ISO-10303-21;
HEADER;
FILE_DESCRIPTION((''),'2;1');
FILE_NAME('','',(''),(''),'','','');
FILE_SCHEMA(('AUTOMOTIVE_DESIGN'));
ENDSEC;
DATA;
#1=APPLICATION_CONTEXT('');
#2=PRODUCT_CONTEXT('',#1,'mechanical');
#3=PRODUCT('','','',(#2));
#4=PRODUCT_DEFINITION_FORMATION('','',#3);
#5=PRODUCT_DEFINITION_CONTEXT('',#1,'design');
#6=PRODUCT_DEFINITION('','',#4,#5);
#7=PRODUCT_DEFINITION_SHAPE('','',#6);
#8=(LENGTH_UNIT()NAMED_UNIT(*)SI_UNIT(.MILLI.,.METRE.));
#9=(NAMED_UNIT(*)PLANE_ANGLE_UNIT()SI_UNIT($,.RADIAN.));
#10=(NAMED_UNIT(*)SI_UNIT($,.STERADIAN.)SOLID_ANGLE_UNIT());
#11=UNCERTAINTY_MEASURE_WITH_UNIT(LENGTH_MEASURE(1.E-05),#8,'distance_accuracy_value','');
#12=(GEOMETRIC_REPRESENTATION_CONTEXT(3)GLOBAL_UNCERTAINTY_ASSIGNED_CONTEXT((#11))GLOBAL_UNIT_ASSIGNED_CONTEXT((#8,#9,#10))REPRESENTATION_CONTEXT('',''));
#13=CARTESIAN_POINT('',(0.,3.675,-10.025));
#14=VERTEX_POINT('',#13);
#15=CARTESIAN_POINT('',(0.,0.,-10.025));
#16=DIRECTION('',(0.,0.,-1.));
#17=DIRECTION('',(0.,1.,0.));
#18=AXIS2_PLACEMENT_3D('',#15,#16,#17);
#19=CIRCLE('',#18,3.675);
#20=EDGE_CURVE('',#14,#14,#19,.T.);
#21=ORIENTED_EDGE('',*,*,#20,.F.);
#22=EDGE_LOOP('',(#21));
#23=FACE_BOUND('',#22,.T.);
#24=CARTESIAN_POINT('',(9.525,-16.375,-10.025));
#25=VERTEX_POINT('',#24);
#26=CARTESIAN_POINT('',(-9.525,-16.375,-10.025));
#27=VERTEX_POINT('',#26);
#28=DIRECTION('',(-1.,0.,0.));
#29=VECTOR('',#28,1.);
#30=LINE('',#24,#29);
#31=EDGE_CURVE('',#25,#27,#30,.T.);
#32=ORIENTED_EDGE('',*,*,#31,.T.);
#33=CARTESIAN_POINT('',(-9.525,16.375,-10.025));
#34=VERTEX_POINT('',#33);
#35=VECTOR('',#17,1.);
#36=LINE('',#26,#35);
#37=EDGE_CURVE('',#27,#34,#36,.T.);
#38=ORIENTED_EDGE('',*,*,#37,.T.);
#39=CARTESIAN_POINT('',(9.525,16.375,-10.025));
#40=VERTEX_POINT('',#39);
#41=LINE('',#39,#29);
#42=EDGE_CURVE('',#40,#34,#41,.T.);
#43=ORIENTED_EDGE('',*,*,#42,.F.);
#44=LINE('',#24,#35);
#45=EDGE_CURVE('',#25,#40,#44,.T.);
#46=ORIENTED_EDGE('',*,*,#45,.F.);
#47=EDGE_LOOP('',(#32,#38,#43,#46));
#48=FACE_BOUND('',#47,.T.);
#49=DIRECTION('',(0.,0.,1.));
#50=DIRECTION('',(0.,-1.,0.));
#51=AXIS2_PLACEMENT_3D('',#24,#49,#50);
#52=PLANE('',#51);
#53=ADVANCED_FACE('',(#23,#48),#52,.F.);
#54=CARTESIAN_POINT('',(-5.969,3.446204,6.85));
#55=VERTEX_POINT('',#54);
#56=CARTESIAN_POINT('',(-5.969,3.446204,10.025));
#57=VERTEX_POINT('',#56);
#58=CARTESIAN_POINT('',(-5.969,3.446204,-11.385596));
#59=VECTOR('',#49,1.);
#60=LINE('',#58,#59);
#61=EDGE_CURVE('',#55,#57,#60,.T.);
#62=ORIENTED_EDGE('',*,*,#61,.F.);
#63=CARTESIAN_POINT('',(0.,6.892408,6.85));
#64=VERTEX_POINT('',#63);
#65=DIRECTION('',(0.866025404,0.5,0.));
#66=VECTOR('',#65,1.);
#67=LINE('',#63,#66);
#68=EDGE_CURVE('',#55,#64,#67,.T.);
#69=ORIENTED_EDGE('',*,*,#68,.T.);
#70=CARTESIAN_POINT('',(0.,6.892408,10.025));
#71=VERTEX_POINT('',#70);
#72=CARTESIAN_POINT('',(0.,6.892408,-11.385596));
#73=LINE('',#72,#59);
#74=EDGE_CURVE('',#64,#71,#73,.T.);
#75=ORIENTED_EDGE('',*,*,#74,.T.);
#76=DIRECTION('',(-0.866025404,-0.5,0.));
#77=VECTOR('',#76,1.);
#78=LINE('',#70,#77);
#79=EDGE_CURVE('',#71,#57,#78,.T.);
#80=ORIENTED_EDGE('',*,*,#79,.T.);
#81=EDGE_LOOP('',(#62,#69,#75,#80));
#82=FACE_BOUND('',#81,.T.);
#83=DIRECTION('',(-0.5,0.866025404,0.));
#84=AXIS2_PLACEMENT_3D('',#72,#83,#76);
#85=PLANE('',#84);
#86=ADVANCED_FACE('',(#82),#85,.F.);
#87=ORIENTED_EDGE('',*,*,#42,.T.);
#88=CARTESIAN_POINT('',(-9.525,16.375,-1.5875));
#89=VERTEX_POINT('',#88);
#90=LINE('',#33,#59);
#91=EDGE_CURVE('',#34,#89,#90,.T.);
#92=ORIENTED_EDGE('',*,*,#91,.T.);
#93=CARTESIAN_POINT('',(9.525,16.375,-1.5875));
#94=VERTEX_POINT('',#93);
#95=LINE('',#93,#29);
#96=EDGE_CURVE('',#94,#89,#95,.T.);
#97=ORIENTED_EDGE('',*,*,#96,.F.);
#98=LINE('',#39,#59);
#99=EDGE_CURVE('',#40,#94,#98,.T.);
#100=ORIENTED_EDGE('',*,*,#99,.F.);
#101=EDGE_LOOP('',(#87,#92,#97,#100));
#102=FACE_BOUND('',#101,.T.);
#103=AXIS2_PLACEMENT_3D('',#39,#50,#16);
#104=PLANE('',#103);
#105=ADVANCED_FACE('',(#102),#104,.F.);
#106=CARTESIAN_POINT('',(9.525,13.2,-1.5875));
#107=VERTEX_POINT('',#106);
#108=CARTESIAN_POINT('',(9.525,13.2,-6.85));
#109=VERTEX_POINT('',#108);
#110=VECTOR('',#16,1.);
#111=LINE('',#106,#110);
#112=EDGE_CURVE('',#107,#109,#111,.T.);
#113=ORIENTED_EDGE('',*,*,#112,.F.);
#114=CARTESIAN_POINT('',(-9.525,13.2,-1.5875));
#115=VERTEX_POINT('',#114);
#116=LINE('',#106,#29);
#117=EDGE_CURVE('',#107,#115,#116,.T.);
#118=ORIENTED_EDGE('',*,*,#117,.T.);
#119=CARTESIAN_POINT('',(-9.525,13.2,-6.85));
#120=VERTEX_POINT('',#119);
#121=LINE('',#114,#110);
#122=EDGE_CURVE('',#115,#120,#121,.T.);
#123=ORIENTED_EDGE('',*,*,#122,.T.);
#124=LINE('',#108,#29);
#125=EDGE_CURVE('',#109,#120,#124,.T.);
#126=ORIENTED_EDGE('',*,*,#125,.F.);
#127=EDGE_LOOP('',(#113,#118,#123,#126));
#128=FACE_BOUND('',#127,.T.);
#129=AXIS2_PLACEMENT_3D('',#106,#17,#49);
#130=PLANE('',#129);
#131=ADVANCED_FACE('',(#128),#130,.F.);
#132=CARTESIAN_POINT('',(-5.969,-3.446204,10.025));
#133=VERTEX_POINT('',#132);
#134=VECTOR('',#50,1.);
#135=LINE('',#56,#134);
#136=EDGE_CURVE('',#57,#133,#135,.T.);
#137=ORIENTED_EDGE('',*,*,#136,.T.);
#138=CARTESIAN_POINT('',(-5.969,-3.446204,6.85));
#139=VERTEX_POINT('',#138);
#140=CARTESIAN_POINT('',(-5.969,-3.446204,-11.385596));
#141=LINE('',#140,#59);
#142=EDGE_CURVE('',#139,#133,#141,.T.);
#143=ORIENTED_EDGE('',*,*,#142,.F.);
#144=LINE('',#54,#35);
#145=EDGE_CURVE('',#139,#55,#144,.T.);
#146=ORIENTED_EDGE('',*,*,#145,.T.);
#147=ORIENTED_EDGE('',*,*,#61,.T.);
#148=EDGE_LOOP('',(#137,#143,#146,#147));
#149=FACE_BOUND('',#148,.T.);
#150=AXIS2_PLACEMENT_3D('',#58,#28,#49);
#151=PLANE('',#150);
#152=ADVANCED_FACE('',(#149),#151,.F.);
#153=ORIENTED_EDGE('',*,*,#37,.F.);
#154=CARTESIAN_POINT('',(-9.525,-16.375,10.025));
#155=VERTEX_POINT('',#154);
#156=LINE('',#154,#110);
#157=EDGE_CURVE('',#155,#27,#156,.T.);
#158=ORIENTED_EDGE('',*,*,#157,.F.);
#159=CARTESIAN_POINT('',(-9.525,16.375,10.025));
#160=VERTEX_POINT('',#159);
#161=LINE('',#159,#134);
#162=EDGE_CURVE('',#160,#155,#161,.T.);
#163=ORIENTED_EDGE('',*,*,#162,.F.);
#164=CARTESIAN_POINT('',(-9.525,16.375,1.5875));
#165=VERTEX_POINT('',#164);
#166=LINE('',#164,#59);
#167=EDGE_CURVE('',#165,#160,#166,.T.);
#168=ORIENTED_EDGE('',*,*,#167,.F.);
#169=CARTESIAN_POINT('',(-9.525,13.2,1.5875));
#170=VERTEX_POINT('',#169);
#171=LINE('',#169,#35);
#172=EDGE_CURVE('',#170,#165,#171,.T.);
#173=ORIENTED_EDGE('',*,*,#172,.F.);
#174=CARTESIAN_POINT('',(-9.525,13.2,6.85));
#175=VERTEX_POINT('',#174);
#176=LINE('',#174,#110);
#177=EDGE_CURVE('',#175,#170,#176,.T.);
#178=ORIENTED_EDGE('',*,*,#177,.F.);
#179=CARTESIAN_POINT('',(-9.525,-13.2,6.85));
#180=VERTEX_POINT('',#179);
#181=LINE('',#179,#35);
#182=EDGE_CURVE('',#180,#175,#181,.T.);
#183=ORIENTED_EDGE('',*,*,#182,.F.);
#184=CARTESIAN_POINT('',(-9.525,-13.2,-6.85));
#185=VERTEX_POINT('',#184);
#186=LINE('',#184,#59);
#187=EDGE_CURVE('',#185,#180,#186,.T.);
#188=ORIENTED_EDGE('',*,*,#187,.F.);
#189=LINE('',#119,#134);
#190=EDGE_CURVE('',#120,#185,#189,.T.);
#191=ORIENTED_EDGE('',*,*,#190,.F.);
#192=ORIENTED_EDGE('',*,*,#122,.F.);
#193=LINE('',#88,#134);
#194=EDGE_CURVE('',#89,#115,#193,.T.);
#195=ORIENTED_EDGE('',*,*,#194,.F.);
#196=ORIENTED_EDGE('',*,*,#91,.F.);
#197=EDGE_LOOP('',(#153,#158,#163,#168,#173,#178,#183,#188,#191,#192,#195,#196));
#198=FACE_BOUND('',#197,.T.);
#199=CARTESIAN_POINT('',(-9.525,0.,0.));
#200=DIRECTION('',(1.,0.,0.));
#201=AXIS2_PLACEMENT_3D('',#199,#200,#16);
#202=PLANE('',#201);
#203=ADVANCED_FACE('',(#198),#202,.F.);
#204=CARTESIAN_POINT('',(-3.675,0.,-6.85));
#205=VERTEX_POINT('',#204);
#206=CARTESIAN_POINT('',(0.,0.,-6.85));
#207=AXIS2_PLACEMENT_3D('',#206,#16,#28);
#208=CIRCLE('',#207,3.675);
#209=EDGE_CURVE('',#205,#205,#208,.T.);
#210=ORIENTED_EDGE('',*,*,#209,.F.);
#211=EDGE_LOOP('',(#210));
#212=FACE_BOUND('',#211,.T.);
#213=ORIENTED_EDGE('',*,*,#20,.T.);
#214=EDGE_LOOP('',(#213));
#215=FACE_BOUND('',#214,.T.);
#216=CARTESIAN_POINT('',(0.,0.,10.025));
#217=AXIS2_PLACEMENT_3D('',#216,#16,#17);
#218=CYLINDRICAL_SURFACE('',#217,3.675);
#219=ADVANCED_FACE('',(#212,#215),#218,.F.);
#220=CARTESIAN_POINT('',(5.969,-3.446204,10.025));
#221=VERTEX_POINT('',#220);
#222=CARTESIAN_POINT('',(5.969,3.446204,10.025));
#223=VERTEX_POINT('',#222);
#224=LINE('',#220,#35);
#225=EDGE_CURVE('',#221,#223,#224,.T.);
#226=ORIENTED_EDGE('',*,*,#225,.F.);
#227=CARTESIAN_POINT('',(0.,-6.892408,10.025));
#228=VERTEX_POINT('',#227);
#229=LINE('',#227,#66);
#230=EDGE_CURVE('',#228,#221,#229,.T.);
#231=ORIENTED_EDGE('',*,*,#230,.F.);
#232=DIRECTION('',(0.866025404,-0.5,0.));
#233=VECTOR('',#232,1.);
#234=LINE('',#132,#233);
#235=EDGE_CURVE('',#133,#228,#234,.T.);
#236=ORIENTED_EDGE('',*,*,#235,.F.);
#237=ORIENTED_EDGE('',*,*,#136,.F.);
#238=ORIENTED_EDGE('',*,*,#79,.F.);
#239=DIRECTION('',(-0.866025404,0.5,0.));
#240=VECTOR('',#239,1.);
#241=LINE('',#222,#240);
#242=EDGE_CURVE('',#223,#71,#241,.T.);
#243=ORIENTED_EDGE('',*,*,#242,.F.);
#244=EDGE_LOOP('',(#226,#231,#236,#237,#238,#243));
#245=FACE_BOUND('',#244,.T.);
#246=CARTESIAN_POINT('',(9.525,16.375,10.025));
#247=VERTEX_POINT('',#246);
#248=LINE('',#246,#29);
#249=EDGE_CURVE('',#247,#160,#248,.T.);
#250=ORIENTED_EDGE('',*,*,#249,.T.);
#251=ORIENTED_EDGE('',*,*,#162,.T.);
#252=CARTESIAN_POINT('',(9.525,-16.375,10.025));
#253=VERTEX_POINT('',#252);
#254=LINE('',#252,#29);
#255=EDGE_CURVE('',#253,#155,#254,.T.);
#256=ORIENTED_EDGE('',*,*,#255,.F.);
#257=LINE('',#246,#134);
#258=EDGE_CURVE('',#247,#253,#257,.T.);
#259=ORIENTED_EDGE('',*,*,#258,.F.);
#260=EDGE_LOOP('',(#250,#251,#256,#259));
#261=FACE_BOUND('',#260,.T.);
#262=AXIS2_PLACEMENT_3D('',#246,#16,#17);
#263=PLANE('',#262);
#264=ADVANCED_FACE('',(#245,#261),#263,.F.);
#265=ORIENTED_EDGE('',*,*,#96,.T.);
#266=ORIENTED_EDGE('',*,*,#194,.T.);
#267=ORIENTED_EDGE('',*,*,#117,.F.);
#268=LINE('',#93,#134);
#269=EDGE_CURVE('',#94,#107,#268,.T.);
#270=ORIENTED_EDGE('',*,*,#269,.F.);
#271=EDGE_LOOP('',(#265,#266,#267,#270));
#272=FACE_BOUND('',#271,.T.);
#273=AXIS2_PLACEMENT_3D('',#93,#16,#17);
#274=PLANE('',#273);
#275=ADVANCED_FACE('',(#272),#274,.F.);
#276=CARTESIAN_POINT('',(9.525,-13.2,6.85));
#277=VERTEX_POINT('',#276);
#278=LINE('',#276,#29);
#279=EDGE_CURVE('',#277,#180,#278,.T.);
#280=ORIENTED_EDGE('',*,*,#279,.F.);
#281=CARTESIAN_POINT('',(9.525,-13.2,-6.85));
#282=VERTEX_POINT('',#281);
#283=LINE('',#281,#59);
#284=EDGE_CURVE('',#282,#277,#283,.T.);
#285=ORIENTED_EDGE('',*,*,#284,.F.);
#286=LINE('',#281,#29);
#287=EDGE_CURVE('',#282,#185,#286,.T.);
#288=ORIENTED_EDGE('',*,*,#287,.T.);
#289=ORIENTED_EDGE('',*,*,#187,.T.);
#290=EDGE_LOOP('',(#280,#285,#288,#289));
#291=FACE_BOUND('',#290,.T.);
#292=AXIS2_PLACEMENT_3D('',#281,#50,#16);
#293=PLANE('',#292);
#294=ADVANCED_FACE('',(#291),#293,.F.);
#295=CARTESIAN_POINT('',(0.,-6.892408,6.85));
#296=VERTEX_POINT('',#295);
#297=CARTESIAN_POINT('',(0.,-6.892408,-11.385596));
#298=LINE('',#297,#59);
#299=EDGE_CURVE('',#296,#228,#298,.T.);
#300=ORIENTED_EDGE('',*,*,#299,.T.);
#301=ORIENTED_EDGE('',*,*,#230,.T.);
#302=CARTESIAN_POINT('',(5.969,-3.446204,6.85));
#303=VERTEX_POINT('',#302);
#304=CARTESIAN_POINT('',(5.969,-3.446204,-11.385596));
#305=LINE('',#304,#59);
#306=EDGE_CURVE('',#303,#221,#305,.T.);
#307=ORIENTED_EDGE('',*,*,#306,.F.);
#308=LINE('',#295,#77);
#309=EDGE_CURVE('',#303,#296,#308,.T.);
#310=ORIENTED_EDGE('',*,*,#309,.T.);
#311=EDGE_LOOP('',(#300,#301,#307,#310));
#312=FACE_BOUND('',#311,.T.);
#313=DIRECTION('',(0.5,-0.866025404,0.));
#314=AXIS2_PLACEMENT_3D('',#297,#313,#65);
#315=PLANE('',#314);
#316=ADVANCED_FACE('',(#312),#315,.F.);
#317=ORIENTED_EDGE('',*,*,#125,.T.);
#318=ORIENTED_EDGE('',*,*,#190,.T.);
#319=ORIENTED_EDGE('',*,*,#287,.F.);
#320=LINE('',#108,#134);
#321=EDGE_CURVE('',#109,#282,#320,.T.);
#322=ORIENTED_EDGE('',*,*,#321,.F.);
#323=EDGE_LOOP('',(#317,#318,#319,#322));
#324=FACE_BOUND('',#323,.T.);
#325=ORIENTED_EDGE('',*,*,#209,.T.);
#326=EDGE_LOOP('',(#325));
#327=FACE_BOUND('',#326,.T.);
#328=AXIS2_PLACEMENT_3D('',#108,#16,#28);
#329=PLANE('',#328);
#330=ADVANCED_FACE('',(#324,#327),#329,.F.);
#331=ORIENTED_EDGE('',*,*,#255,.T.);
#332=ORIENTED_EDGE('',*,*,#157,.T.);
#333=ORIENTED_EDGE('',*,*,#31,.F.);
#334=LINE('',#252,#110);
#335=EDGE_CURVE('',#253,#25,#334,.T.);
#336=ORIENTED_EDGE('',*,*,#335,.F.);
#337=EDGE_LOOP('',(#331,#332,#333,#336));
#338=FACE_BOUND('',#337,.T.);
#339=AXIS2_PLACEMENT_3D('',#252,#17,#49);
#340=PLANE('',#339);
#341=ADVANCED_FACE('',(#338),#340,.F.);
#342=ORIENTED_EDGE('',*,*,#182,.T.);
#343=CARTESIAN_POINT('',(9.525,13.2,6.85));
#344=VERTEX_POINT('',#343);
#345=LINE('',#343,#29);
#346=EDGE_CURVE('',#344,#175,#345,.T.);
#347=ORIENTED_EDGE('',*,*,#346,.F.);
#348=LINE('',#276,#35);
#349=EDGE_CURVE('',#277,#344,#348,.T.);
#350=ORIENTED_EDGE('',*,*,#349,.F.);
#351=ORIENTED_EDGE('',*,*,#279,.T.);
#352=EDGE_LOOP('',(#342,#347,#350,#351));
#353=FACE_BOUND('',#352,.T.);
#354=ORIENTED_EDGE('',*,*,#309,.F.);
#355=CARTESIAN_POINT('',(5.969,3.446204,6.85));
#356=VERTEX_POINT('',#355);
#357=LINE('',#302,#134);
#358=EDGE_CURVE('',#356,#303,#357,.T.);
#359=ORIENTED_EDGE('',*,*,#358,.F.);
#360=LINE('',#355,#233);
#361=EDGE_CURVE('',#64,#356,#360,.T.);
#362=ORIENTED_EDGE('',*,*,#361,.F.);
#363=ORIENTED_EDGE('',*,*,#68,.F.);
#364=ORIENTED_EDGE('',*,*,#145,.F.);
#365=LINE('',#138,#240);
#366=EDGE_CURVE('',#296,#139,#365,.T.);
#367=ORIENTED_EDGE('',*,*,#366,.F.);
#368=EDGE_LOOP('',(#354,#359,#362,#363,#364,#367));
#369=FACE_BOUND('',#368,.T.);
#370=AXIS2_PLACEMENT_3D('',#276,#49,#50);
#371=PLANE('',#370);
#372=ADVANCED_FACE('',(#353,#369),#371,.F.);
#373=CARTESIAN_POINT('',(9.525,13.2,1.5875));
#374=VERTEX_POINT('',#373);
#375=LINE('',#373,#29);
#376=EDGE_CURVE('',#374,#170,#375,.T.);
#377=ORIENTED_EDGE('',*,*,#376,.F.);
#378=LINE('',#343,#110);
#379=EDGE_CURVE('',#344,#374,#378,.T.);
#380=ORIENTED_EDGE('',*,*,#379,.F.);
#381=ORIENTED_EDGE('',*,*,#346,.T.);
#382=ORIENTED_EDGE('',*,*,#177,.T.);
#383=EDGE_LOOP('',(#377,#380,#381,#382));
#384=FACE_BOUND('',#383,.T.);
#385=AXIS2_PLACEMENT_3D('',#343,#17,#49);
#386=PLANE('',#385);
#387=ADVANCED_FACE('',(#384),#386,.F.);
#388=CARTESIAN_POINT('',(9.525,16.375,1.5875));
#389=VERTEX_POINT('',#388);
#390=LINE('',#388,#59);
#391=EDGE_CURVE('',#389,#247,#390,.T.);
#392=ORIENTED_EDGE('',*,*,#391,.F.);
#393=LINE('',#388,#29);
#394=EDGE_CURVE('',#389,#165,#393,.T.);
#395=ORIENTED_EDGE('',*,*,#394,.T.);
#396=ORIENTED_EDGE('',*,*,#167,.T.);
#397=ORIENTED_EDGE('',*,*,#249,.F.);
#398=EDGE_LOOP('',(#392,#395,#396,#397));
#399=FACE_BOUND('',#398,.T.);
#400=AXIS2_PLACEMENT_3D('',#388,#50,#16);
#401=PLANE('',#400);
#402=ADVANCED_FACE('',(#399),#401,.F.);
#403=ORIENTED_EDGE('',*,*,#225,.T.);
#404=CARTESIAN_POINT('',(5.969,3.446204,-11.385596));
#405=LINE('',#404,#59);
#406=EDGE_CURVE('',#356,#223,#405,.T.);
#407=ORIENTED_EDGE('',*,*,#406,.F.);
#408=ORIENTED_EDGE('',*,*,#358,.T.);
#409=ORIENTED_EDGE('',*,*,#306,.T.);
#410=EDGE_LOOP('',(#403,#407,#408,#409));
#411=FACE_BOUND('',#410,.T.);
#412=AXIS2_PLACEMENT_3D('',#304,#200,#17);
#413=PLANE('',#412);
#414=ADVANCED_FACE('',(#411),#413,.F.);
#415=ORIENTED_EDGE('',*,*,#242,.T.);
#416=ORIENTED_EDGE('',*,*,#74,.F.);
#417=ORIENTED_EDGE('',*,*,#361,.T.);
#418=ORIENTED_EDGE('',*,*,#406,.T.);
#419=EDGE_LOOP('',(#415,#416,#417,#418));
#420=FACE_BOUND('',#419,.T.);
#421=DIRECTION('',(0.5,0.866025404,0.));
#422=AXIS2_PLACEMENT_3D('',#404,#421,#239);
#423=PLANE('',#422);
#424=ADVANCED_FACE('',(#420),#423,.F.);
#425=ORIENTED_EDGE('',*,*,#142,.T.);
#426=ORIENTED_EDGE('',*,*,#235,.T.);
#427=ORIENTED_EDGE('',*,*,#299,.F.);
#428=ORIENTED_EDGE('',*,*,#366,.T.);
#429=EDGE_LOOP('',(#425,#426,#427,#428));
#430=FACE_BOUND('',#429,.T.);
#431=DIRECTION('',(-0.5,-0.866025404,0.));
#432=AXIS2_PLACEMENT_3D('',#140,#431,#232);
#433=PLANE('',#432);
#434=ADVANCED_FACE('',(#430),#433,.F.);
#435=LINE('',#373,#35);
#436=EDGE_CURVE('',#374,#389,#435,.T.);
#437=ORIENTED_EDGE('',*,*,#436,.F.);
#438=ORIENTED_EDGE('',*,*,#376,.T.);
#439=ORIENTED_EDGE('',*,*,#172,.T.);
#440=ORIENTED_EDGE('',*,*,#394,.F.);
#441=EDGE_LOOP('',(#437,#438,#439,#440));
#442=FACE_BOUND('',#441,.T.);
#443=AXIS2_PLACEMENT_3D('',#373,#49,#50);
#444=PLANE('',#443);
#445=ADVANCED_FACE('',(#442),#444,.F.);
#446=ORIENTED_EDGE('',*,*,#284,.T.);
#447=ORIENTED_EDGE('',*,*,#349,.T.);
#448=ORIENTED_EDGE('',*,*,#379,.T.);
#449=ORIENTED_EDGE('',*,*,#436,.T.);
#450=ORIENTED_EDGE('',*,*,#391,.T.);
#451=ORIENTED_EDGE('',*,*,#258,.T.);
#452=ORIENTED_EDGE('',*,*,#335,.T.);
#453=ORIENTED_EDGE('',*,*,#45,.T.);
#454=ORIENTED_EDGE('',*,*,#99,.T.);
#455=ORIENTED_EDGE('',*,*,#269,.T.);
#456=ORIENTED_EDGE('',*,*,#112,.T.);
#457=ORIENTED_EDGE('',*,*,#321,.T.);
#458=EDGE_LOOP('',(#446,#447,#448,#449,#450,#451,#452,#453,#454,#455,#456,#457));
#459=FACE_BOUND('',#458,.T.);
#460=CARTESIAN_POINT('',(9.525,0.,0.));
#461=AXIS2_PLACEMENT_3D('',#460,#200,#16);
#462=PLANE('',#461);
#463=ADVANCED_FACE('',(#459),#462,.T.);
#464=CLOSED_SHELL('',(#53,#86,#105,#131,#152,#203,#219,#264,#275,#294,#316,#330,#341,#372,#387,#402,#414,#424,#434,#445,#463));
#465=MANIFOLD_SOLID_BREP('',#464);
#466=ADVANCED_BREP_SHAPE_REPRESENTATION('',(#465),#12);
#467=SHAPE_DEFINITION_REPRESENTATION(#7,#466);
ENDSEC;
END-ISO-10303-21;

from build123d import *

# Parameters (mm, degrees)
TOP_START                      = -3.123265701
TOP_BAR_CUT_EXTRUDE1_OUTLINE_W = 203.2
TOP_BAR_CUT_EXTRUDE1_OUTLINE_H = 25.4
TOP_BAR_CUT_EXTRUDE1_DEPTH     = 12.7
TOP_START_2                    = 6.35
TOP_BAR_OUTLINE_W              = 203.2
TOP_BAR_OUTLINE_H              = 25.4
TOP_BAR_DEPTH                  = 3.226734299
TOP_BAR_2_DEPTH                = 9.473265701
TOP_START_3                    = -6.35
TOP_BAR_3_OUTLINE_W            = 203.2
TOP_BAR_3_OUTLINE_H            = 25.4
TOP_BAR_3_DEPTH                = 12.7
BOSS_EXTRUDE2_DEPTH            = 9.525
SKETCH4_R                      = 3.675
CUT_EXTRUDE1_DEPTH             = 28.583849441
CUT_EXTRUDE2_DEPTH             = 3.175


# Read off the part's stored shape, not the designer's step: <top bar>-<Cut-Extrude1>, top bar
with BuildPart() as part:
    # <top bar>-<Cut-Extrude1> outline → <top bar>-<Cut-Extrude1> (new body)
    with BuildSketch(Plane.XY.offset(TOP_START)):
        with Locations((-0.022421442, 2.056236138)):
            Rectangle(TOP_BAR_CUT_EXTRUDE1_OUTLINE_W, TOP_BAR_CUT_EXTRUDE1_OUTLINE_H)
        with BuildLine():
            ThreePointArc((-95.272421442, -1.618763862), (-98.947421442, 2.056236138), (-95.272421442, 5.731236138))
            Line((-95.272421442, 5.731236138), (6.327578558, 5.731236138))
            ThreePointArc((6.327578558, 5.731236138), (10.002578558, 2.056236138), (6.327578558, -1.618763862))
            Line((6.327578558, -1.618763862), (-95.272421442, -1.618763862))
        make_face(mode=Mode.SUBTRACT)
    extrude(amount=TOP_BAR_CUT_EXTRUDE1_DEPTH)

    # top bar outline → top bar (cut)
    with BuildSketch(Plane.XY.offset(TOP_START_2)):
        with Locations((-0.022421442, 2.056236138)):
            Rectangle(TOP_BAR_OUTLINE_W, TOP_BAR_OUTLINE_H)
        with BuildLine():
            ThreePointArc((6.327578558, 5.731236138), (10.002578558, 2.056236138), (6.327578558, -1.618763862))
            Line((6.327578558, -1.618763862), (-95.272421442, -1.618763862))
            ThreePointArc((-95.272421442, -1.618763862), (-98.947421442, 2.056236138), (-95.272421442, 5.731236138))
            Line((-95.272421442, 5.731236138), (6.327578558, 5.731236138))
        make_face(mode=Mode.SUBTRACT)
    extrude(amount=TOP_BAR_DEPTH, mode=Mode.SUBTRACT)

    # top bar 2 outline → top bar 2 (cut)
    with BuildSketch(Plane.XY.offset(TOP_START)):
        Polygon((-101.6, 12.7), (101.577578558, 12.7), (101.577578558, 14.756236138), (-101.622421442, 14.756236138), (-101.622421442, -10.643763862), (-101.6, -10.643763862), align=None)
        with BuildLine():
            ThreePointArc((-95.272421442, -1.618763862), (-97.461703705, -0.895486778), (-98.789240286, 0.989648017))
            ThreePointArc((-98.789240286, 0.989648017), (-98.177676678, -2.221336145), (-95.25, -3.675))
            Line((-95.25, -3.675), (6.35, -3.675))
            ThreePointArc((6.35, -3.675), (9.301722916, -2.189282263), (9.866818844, 1.066588121))
            ThreePointArc((9.866818844, 1.066588121), (8.548914703, -0.87144054), (6.327578558, -1.618763862))
            Line((6.327578558, -1.618763862), (-95.272421442, -1.618763862))
        make_face()
    extrude(amount=TOP_BAR_2_DEPTH, mode=Mode.SUBTRACT)

    # top bar 3 outline → top bar 3 (add)
    with BuildSketch(Plane.XY.offset(TOP_START_3)):
        Rectangle(TOP_BAR_3_OUTLINE_W, TOP_BAR_3_OUTLINE_H)
        with BuildLine():
            ThreePointArc((-95.25, -3.675), (-98.925, 0), (-95.25, 3.675))
            Line((-95.25, 3.675), (6.35, 3.675))
            ThreePointArc((6.35, 3.675), (10.025, 0), (6.35, -3.675))
            Line((6.35, -3.675), (-95.25, -3.675))
        make_face(mode=Mode.SUBTRACT)
    extrude(amount=TOP_BAR_3_DEPTH)


with BuildPart() as body_2:
    # Sketch3 → Boss-Extrude2 (new, symmetric)
    with BuildSketch(Plane(origin=(0, 0, 0), x_dir=(0, 0, -1), z_dir=(1, 0, 0))):
        Polygon((-1.5875, 13.2), (-1.5875, 16.375), (-10.025, 16.375), (-10.025, -16.375), (10.025, -16.375), (10.025, 16.375), (1.5875, 16.375), (1.5875, 13.2), (6.85, 13.2), (6.85, -13.2), (-6.85, -13.2), (-6.85, 13.2), align=None)
    extrude(amount=BOSS_EXTRUDE2_DEPTH, both=True)

    # Sketch4 → Cut-Extrude1 (cut, through all)
    with BuildSketch(Plane(origin=(0, 0, -10.025), x_dir=(-1, 0, 0), z_dir=(0, 0, -1))):
        with Locations(Location((0, 0, 0), (0, 0, 90))):
            Circle(SKETCH4_R)
    extrude(amount=-CUT_EXTRUDE1_DEPTH, mode=Mode.SUBTRACT)

    # Sketch5 → Cut-Extrude2 (cut)
    with BuildSketch(Plane.XY.offset(10.025)):
        Polygon((0, 6.892407514), (-5.969, 3.446203757), (-5.969, -3.446203757), (0, -6.892407514), (5.969, -3.446203757), (5.969, 3.446203757), align=None)
    extrude(amount=-CUT_EXTRUDE2_DEPTH, mode=Mode.SUBTRACT)


solid = body_2.part
